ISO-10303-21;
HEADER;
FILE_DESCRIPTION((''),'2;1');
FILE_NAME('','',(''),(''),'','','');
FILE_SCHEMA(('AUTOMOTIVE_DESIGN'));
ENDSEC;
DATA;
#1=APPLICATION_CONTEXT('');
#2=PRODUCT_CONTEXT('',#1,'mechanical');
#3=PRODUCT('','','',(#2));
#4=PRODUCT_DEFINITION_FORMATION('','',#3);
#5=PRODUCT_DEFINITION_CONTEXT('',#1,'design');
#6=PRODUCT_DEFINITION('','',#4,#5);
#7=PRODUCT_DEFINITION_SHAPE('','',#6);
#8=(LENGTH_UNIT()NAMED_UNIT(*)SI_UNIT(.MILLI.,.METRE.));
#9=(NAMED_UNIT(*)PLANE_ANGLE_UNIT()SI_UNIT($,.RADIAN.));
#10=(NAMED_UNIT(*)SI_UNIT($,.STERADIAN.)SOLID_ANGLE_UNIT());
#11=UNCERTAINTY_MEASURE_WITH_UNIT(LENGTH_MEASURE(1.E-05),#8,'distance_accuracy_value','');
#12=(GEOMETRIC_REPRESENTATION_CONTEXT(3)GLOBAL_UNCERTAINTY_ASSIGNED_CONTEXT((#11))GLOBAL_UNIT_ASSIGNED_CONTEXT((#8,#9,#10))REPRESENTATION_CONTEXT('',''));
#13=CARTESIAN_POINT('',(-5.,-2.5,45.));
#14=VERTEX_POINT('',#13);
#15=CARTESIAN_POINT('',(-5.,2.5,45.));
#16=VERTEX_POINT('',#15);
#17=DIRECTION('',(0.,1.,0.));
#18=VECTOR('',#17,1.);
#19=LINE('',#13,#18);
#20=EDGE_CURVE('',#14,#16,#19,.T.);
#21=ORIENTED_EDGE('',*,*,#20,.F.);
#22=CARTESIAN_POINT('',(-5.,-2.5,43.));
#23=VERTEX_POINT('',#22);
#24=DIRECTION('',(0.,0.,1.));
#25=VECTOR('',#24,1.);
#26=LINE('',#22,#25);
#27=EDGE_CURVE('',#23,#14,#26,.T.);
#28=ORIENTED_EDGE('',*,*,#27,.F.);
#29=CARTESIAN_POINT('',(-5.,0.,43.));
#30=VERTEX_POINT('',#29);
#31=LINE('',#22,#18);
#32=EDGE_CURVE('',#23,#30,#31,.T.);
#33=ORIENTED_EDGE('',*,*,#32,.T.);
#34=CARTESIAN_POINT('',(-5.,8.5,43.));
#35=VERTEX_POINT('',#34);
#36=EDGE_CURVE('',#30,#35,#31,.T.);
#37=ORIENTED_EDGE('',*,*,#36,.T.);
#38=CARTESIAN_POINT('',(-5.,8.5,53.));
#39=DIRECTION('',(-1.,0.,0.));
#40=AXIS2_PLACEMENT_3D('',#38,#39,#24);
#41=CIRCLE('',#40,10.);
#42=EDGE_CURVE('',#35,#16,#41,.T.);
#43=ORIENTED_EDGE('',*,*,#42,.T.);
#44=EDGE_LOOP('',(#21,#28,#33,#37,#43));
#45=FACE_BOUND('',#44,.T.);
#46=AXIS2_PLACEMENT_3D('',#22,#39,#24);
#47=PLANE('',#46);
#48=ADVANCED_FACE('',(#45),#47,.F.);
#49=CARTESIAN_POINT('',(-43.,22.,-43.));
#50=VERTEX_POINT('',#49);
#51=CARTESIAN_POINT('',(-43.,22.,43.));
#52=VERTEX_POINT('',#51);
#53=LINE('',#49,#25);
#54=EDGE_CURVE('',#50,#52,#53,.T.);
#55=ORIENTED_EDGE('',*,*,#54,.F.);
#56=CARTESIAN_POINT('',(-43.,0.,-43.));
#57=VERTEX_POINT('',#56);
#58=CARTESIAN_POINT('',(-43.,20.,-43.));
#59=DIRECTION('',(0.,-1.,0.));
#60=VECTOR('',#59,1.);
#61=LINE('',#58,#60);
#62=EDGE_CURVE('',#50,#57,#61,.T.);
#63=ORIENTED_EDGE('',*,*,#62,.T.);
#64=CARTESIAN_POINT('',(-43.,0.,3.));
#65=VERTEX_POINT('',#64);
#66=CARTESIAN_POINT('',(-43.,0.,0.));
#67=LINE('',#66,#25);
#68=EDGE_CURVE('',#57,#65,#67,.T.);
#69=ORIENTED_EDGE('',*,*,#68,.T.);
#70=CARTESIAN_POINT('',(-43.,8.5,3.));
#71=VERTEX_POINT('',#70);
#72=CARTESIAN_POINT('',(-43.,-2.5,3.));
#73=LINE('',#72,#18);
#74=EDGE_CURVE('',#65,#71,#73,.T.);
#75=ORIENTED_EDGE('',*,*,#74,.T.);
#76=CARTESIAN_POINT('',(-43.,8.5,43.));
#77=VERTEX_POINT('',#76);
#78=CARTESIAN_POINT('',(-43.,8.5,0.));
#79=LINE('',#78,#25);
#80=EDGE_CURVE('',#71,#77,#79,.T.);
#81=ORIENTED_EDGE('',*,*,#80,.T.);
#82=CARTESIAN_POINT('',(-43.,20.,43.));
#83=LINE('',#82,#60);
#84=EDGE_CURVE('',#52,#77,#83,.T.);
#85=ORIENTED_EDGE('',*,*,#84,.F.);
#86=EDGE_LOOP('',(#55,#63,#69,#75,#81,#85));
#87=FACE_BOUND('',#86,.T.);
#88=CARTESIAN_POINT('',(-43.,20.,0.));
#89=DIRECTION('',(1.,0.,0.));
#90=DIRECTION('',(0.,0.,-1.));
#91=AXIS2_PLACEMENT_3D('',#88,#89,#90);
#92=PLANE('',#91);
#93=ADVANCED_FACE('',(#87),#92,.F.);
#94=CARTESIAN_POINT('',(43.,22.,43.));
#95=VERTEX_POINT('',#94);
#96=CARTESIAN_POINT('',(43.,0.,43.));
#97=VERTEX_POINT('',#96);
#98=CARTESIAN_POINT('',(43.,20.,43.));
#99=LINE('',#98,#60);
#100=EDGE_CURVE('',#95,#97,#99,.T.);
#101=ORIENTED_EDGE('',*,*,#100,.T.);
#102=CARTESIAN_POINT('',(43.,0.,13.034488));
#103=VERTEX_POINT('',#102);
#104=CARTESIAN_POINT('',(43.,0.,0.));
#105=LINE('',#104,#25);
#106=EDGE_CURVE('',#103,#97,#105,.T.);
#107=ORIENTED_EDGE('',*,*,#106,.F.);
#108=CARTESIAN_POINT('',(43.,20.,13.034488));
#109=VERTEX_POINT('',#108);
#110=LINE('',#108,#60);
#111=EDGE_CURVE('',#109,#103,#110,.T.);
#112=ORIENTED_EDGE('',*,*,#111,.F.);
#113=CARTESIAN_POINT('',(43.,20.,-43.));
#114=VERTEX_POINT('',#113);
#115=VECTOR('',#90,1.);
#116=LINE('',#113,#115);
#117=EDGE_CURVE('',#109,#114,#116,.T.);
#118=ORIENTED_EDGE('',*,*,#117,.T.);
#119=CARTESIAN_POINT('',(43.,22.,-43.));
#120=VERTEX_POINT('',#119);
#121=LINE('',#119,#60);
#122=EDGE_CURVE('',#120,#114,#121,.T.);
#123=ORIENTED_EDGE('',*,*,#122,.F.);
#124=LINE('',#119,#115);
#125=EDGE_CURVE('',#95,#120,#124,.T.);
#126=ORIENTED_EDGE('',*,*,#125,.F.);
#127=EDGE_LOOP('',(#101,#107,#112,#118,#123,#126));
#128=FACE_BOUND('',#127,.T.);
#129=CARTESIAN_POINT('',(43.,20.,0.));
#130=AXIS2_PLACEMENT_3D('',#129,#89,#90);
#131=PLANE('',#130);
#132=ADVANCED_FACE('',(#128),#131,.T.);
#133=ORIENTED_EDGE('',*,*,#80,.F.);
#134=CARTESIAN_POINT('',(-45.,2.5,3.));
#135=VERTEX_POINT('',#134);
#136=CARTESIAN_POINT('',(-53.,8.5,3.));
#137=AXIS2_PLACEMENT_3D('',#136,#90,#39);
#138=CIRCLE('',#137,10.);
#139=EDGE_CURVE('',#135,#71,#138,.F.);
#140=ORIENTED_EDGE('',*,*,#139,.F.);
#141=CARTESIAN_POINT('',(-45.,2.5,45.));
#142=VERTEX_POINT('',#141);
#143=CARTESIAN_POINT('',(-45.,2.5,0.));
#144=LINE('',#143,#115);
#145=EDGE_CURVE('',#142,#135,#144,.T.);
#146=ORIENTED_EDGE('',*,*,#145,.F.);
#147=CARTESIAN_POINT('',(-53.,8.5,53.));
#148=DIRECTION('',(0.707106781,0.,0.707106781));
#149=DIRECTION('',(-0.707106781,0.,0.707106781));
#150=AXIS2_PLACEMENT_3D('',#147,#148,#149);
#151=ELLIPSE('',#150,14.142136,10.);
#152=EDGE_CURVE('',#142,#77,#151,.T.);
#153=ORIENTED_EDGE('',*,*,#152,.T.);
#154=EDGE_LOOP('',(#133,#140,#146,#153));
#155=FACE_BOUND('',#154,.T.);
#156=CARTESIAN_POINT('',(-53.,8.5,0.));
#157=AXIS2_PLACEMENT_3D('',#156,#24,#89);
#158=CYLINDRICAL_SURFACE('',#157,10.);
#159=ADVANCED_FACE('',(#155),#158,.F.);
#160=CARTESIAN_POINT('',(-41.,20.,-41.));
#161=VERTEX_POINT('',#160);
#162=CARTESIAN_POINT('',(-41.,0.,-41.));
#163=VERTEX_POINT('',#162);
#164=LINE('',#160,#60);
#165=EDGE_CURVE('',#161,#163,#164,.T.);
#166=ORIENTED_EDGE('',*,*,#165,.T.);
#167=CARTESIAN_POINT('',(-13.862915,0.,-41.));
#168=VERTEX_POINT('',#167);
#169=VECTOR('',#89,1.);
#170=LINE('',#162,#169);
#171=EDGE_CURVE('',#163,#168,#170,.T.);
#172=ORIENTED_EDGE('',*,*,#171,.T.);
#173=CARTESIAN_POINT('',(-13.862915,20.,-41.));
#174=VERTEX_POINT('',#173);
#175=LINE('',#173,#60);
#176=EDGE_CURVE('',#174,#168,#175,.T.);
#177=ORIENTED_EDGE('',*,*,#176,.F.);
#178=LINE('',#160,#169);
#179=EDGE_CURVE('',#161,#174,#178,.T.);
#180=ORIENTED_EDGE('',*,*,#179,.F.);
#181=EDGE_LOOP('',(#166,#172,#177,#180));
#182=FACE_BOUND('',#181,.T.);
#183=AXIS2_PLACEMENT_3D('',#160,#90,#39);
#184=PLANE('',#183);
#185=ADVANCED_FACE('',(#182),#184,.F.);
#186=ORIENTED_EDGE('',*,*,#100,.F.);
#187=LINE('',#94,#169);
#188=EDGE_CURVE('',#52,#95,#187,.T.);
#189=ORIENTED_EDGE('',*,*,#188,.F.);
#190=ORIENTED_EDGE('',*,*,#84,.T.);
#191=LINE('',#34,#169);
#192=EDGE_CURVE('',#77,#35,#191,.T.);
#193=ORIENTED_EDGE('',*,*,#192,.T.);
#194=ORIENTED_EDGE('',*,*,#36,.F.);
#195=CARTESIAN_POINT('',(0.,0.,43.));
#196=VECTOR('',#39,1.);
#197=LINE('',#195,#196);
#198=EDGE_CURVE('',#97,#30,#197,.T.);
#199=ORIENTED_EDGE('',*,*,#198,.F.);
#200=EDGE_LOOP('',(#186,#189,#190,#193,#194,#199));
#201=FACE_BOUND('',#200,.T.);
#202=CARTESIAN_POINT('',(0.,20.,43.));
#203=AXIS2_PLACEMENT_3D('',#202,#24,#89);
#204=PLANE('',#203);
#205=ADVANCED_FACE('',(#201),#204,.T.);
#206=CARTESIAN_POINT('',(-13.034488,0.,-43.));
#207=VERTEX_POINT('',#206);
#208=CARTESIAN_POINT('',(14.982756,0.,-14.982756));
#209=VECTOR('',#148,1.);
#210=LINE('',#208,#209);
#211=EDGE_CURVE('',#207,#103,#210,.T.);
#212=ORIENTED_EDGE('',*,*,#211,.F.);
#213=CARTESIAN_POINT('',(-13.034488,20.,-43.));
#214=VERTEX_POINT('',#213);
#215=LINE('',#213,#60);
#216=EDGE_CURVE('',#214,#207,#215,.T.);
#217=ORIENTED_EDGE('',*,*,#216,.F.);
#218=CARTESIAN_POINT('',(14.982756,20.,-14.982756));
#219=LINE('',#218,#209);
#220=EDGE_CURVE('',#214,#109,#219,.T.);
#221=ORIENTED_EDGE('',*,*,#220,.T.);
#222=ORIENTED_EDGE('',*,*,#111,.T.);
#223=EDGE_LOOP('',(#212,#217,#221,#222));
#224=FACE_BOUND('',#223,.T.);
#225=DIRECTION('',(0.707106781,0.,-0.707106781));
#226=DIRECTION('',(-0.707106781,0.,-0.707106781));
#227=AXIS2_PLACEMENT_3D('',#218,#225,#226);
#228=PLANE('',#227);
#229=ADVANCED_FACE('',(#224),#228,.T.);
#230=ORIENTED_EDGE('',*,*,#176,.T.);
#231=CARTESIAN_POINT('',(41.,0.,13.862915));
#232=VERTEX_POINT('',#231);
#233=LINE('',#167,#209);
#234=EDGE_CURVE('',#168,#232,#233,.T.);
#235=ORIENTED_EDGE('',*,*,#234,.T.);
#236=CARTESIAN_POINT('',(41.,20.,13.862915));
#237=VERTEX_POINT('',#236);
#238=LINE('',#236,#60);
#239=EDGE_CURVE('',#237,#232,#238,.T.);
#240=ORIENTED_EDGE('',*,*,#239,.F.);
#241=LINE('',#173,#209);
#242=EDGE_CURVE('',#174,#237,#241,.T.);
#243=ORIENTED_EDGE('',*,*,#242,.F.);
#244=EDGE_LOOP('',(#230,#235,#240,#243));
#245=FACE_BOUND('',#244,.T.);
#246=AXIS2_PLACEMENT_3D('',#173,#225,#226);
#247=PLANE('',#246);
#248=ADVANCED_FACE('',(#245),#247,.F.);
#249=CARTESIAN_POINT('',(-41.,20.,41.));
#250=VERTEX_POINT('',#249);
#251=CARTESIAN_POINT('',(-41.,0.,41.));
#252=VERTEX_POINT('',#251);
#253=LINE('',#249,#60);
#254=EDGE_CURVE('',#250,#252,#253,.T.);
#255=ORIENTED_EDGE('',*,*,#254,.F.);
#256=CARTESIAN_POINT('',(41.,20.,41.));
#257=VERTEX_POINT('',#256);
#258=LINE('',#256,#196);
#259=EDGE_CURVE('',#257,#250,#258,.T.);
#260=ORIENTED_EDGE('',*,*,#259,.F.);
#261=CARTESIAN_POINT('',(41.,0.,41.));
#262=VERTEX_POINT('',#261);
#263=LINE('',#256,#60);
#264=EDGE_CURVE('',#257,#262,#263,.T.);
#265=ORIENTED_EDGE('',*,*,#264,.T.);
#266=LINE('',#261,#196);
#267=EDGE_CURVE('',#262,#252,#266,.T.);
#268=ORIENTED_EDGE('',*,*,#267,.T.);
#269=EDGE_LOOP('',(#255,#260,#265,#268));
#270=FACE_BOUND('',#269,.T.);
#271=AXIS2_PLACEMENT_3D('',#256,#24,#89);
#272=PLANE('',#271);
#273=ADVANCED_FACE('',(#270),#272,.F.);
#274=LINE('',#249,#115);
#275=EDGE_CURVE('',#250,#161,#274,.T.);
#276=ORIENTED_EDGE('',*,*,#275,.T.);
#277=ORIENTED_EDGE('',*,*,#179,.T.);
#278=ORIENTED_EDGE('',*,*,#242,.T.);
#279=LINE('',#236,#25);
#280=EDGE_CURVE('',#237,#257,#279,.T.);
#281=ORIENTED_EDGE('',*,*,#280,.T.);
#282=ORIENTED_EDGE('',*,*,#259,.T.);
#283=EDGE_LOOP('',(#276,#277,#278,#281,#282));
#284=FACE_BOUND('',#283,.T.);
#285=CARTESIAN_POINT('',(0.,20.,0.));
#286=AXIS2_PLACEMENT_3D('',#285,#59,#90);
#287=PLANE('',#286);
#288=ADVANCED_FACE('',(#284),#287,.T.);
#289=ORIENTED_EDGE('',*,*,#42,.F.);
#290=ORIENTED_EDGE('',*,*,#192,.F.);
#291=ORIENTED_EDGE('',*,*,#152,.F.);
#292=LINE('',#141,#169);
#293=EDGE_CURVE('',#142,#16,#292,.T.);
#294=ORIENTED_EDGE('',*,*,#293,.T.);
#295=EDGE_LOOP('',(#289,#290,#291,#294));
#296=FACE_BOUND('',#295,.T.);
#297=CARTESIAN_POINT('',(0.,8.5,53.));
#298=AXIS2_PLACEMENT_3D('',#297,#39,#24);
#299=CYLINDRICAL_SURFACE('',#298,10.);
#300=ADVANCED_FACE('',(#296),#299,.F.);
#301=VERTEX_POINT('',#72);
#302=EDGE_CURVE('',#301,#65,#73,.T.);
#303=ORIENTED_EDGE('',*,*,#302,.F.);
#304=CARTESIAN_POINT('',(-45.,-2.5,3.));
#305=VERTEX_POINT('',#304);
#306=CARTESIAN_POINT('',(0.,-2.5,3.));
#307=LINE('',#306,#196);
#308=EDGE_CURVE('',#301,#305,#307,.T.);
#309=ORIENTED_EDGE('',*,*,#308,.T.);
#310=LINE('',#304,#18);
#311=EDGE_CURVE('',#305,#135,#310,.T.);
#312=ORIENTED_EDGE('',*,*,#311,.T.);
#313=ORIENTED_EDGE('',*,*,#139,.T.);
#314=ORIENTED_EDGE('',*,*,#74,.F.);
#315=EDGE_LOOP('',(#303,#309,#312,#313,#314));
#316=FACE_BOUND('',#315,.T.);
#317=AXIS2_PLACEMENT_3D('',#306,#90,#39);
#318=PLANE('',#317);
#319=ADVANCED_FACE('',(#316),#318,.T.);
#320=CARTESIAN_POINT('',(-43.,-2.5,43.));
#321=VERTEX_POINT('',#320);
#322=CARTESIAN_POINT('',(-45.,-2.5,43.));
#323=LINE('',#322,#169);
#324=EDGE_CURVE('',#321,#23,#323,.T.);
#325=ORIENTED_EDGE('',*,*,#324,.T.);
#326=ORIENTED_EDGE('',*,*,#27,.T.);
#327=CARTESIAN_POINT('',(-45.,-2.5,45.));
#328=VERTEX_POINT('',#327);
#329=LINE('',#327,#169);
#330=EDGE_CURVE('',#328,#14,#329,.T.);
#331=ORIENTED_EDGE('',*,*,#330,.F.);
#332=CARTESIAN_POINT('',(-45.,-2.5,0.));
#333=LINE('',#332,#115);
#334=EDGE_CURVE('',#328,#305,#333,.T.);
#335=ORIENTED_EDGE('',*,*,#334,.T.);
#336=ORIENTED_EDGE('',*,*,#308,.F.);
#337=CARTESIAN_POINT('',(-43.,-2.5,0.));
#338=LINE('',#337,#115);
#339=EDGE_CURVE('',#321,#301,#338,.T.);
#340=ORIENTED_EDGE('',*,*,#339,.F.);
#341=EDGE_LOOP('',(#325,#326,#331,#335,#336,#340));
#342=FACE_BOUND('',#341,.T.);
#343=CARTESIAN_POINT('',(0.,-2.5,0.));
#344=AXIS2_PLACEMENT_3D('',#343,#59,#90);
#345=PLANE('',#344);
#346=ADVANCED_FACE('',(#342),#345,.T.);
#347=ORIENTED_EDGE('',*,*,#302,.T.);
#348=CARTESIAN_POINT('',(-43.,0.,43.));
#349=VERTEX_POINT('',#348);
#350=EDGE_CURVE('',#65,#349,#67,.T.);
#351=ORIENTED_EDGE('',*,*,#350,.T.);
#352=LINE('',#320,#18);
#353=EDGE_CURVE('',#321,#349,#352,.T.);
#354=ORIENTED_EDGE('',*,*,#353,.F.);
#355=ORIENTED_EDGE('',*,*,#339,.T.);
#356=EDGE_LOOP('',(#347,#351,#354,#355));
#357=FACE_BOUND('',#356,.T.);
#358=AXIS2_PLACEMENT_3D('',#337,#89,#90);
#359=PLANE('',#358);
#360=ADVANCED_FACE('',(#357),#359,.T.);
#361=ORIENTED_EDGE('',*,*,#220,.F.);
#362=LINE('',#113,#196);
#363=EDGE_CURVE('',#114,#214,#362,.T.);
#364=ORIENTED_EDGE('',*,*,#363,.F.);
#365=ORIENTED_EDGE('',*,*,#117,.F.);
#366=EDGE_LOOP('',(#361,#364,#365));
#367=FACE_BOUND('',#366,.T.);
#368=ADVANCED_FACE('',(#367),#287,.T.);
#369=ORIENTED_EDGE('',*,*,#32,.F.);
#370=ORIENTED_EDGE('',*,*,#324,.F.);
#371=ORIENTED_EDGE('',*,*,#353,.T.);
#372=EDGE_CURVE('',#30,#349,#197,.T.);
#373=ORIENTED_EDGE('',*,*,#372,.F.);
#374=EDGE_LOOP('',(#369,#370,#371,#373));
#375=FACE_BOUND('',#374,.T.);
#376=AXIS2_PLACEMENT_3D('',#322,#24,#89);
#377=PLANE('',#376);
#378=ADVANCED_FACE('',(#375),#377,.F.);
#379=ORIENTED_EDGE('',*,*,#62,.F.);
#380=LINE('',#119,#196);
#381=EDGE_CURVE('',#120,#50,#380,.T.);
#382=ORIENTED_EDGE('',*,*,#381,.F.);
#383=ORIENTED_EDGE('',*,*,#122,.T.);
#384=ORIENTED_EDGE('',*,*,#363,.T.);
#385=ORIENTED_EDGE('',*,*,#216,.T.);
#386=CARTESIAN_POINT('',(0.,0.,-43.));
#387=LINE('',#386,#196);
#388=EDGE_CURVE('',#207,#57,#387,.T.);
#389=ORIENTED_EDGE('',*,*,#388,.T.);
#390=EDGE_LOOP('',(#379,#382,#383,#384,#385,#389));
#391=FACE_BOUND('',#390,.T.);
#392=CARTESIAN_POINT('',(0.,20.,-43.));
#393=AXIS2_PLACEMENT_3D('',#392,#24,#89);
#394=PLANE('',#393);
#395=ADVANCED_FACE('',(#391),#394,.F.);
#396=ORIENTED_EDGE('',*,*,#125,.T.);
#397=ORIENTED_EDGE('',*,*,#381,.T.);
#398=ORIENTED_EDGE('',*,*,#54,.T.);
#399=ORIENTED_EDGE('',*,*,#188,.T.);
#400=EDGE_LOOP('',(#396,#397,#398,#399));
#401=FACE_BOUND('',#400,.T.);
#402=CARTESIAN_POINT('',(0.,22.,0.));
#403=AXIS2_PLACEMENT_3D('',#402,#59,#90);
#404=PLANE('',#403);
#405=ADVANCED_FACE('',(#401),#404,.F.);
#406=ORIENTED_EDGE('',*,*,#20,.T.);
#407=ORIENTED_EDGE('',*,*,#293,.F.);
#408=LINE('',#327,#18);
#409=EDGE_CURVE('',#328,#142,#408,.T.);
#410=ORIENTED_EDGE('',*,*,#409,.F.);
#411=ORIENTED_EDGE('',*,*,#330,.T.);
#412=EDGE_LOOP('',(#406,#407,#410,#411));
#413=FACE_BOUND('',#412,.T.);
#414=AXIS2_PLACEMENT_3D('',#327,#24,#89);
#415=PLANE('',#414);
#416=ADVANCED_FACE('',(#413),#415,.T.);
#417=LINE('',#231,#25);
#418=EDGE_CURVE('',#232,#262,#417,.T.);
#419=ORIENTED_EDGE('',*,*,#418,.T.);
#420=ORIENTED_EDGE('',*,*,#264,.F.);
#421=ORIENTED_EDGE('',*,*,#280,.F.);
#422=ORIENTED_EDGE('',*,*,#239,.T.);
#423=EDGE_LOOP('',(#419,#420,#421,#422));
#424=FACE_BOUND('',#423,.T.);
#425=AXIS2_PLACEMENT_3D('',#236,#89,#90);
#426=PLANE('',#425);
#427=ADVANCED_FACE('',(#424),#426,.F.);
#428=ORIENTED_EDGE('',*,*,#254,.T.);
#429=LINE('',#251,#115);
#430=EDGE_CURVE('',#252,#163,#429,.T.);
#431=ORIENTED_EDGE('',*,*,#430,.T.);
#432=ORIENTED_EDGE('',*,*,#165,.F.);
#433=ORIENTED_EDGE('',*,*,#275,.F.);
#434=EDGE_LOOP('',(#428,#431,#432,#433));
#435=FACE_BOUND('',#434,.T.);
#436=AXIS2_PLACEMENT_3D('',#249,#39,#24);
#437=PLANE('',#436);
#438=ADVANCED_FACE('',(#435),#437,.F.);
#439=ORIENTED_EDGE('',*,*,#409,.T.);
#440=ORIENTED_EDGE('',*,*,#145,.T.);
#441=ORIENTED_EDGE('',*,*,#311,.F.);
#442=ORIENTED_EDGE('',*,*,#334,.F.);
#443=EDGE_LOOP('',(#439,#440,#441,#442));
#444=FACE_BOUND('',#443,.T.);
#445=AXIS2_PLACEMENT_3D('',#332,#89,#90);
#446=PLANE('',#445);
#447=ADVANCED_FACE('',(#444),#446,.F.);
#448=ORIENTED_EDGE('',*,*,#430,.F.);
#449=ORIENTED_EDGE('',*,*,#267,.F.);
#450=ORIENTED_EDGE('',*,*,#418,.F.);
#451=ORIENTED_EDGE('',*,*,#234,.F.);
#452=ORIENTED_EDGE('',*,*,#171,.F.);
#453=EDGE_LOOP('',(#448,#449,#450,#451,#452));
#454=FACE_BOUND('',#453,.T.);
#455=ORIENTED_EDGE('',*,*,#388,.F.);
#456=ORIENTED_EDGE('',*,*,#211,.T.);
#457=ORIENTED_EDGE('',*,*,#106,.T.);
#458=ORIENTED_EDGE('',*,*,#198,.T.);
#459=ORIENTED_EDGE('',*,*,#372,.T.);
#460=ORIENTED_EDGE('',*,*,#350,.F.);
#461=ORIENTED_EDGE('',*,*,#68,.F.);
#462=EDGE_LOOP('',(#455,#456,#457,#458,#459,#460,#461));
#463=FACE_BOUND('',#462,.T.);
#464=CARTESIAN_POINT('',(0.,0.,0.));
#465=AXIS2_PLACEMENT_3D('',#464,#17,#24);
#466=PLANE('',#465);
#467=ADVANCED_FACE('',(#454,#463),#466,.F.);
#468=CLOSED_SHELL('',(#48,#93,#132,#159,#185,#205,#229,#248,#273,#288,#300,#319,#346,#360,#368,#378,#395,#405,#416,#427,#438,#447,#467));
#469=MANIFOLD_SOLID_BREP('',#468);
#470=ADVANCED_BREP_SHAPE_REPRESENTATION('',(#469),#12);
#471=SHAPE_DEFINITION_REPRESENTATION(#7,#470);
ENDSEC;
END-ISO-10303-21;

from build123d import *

# Parameters (mm, degrees)
BOSS_EXTRUDE1_DEPTH = 20
SKETCH2_W           = 86
SKETCH2_H           = 86
BOSS_EXTRUDE2_DEPTH = 2
CUT_EXTRUDE1_DEPTH  = 20
SKETCH4_W           = 2
SKETCH4_H           = 40
SKETCH4_W_2         = 40
SKETCH4_H_2         = 2
BOSS_EXTRUDE4_DEPTH = 2.5
FILLET1_R           = 10


with BuildPart() as part:
    # Sketch1 → Boss-Extrude1 (new body)
    with BuildSketch(Plane(origin=(0, 0, 0), x_dir=(1, 0, 0), z_dir=(0, 1, 0))):
        Polygon((-43, 43), (-43, -43), (14.982756057, 14.982756057), (-13.034487885, 43), align=None)
        Polygon((14.982756057, 14.982756057), (-43, -43), (43, -43), (43, -13.034487885), align=None)
    extrude(amount=BOSS_EXTRUDE1_DEPTH)

    # Sketch2 → Boss-Extrude2 (add)
    with BuildSketch(Plane(origin=(0, 20, 0), x_dir=(1, 0, 0), z_dir=(0, 1, 0))):
        Rectangle(SKETCH2_W, SKETCH2_H)
    extrude(amount=BOSS_EXTRUDE2_DEPTH)

    # Sketch3 → Cut-Extrude1 (cut)
    with BuildSketch(Plane.XZ):
        Polygon((-13.86291501, -41), (41, 13.86291501), (41, 41), (-41, 41), (-41, -41), align=None)
    extrude(amount=-CUT_EXTRUDE1_DEPTH, mode=Mode.SUBTRACT)

    # Sketch4 → Boss-Extrude4 (add, symmetric)
    with BuildSketch(Plane.XZ):
        with Locations((-44, 23)):
            Rectangle(SKETCH4_W, SKETCH4_H)
        with Locations((-25, 44)):
            Rectangle(SKETCH4_W_2, SKETCH4_H_2)
    extrude(amount=BOSS_EXTRUDE4_DEPTH, both=True)

    # Fillet1
    # the kernel refuses this fillet: 10 mm, written as the material it adds along each edge
    with BuildSketch(Plane(origin=(-43, 2.5, 3), x_dir=(0, 1, 0), z_dir=(0, 0, 1))) as fillet1_piece_1:
        with BuildLine():
            CenterArc((6, 10), FILLET1_R, 233.130102354, 36.869897646)
            Line((0, 2), (-0.12, 1.84))
            ThreePointArc((-0.12, 1.84), (-0.2, 1), (-0.2, 0))
            Line((-0.2, 0), (0, -0.2))
            Line((0, -0.2), (6, -0.2))
            Line((6, -0.2), (6, 0))
        make_face()
    extrude(amount=40)
    with BuildSketch(Plane(origin=(-5, 2.5, 43), x_dir=(0, 0, 1), z_dir=(-1, 0, 0))) as fillet1_piece_2:
        with BuildLine():
            CenterArc((10, 6), FILLET1_R, 180, 36.869897646)
            Line((0, 6), (-0.2, 6))
            Line((-0.2, 6), (-0.2, 0))
            Line((-0.2, 0), (0, -0.2))
            ThreePointArc((0, -0.2), (1, -0.2), (1.84, -0.12))
            Line((1.84, -0.12), (2, 0))
        make_face()
    extrude(amount=38)
    with BuildSketch(Plane(origin=(-43, 2.5, 3), x_dir=(0, 1, 0), z_dir=(0, 0, 1))) as fillet1_piece_3a_section:
        with BuildLine():
            CenterArc((6, 10), FILLET1_R, 233.130102354, 36.869897646)
            Line((0, 2), (-0.12, 1.84))
            ThreePointArc((-0.12, 1.84), (-0.2, 1), (-0.2, 0))
            Line((-0.2, 0), (0, -0.2))
            Line((0, -0.2), (6, -0.2))
            Line((6, -0.2), (6, 0))
        make_face()
    fillet1_piece_3a = extrude(amount=55, mode=Mode.PRIVATE)
    fillet1_piece_3a = split(fillet1_piece_3a, bisect_by=Plane(origin=(-43.452376795, 4.199345627, 43), z_dir=(0, 0, 1)), keep=Keep.TOP, mode=Mode.PRIVATE)
    fillet1_piece_3a = split(fillet1_piece_3a, bisect_by=Plane(origin=(-43.452376795, 4.199345627, 45), z_dir=(0, 0, -1)), keep=Keep.TOP, mode=Mode.PRIVATE)
    with BuildSketch(Plane(origin=(-5, 2.5, 43), x_dir=(0, 0, 1), z_dir=(-1, 0, 0))) as fillet1_piece_3b_section:
        with BuildLine():
            CenterArc((10, 6), FILLET1_R, 180, 36.869897646)
            Line((0, 6), (-0.2, 6))
            Line((-0.2, 6), (-0.2, 0))
            Line((-0.2, 0), (0, -0.2))
            ThreePointArc((0, -0.2), (1, -0.2), (1.84, -0.12))
            Line((1.84, -0.12), (2, 0))
        make_face()
    fillet1_piece_3b = extrude(amount=53, mode=Mode.PRIVATE)
    fillet1_piece_3b = split(fillet1_piece_3b, bisect_by=Plane(origin=(-43, 4.199345627, 43.452376795), z_dir=(-1, 0, 0)), keep=Keep.TOP, mode=Mode.PRIVATE)
    fillet1_piece_3b = split(fillet1_piece_3b, bisect_by=Plane(origin=(-45, 4.199345627, 43.452376795), z_dir=(1, 0, 0)), keep=Keep.TOP, mode=Mode.PRIVATE)
    fillet1_piece_3 = fillet1_piece_3a & fillet1_piece_3b
    add(fillet1_piece_3)


solid = part.part
